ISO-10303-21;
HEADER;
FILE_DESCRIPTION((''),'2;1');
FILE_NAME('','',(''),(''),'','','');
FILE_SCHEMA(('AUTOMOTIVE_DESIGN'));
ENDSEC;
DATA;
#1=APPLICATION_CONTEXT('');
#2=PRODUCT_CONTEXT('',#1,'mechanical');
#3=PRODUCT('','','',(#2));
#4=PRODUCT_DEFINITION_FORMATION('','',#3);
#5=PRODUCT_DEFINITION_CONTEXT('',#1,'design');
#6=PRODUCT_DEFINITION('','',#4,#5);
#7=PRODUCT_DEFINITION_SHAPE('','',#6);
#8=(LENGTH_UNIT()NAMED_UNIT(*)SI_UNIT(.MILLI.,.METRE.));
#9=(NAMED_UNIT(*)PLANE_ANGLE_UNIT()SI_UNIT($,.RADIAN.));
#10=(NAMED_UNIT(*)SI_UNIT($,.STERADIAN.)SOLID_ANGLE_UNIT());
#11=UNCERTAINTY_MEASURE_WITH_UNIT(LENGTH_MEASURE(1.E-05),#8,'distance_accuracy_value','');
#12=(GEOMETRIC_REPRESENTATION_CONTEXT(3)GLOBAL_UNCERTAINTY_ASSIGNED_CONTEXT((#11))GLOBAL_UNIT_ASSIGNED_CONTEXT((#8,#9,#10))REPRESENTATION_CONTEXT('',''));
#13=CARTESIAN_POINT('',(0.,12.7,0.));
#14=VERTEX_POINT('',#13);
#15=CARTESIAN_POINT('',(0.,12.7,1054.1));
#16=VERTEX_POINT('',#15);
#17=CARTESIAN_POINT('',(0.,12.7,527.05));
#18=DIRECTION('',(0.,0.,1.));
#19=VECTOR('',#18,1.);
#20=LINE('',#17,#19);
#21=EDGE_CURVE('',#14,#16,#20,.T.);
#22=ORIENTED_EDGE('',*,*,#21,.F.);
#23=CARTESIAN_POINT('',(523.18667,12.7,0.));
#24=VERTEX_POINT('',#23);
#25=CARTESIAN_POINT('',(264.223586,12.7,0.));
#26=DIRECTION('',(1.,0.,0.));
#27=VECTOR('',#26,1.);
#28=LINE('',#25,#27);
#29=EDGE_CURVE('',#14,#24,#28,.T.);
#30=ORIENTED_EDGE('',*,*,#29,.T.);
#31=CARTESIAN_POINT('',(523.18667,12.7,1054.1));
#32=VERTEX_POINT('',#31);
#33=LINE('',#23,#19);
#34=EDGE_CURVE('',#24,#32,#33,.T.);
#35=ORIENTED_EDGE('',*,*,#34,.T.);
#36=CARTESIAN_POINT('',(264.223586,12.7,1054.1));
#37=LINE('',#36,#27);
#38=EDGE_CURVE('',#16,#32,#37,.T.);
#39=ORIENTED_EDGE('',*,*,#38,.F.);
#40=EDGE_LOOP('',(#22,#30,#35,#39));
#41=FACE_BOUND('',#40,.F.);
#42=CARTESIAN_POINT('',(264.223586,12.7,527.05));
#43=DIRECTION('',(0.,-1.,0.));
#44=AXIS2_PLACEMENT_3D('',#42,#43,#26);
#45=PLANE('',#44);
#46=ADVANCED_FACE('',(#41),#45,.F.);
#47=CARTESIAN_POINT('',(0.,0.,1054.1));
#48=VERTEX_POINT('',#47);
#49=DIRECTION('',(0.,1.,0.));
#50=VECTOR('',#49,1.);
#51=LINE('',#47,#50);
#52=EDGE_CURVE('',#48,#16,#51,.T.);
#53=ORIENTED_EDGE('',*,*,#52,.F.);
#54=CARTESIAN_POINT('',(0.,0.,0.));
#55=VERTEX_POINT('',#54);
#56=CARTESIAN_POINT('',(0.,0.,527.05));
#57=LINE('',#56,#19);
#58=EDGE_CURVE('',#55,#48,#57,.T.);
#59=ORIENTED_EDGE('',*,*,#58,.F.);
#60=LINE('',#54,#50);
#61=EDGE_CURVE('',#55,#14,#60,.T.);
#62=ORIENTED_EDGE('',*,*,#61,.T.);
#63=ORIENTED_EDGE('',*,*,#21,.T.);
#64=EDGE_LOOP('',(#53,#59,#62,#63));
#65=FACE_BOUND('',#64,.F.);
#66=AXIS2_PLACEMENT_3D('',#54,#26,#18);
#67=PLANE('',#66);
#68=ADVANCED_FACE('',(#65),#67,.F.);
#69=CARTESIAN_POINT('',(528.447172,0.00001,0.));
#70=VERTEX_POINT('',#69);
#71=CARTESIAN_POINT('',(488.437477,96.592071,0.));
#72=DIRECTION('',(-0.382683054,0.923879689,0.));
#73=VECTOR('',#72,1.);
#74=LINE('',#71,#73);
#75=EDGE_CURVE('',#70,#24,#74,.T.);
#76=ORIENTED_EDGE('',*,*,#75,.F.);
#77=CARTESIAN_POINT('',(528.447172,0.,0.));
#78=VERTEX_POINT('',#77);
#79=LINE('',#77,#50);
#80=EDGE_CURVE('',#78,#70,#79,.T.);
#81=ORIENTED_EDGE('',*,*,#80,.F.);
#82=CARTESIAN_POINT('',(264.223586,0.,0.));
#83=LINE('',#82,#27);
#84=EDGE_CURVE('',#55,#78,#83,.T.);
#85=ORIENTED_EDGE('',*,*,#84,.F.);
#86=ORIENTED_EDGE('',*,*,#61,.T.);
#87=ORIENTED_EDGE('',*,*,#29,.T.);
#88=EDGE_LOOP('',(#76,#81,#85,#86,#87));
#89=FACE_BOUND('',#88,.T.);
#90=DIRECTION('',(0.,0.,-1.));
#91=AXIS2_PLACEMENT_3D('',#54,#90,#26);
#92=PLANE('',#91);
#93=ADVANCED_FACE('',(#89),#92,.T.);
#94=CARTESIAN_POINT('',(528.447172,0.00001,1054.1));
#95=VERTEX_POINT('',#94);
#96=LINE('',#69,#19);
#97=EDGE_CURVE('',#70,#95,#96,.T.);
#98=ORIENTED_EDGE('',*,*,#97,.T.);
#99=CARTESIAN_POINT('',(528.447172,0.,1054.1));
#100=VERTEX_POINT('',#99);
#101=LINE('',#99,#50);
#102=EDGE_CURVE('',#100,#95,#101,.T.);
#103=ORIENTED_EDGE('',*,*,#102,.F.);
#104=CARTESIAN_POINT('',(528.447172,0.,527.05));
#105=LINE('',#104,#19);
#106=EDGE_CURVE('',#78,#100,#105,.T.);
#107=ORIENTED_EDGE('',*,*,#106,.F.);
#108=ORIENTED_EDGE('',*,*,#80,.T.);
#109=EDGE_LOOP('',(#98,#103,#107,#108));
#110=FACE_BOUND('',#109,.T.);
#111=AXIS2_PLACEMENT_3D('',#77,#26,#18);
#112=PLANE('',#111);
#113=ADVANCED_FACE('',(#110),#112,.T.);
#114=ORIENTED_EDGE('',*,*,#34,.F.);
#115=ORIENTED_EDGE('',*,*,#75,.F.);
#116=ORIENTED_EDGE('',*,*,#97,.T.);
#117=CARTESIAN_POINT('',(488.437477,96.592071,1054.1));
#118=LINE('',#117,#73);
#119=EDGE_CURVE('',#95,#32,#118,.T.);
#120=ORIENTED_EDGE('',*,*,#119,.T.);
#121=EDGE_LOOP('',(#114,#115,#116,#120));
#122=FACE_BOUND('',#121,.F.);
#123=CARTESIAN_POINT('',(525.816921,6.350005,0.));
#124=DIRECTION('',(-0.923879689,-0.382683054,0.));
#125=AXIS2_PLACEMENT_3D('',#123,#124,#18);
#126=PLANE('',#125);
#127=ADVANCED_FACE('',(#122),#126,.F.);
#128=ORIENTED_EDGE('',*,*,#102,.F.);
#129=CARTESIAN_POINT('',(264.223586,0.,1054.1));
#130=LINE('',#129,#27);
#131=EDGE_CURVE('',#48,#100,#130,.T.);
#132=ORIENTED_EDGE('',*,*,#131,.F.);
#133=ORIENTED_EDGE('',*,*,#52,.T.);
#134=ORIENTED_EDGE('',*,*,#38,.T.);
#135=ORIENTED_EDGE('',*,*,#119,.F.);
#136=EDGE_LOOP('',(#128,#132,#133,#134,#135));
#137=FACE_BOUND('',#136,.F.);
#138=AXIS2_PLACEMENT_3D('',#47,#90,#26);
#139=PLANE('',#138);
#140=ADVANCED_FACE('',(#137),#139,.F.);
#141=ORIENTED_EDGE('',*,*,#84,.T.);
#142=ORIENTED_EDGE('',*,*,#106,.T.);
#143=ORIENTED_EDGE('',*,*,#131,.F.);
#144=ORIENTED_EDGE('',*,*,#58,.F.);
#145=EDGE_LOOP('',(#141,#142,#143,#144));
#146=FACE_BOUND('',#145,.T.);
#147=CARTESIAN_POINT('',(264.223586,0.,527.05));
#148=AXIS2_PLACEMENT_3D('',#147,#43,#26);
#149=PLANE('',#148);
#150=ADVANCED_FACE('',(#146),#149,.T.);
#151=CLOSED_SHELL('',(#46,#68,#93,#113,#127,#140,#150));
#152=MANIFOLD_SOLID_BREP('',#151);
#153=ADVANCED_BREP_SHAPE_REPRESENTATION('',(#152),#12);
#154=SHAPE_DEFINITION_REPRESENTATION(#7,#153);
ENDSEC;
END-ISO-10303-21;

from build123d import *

# Parameters (mm, degrees)
F0_W     = 528.4471722421
F0_H     = 1054.1
F1_DEPTH = 12.7
F2_SIZE2 = 5.260502
F2_SIZE  = 12.69999


# Not quite as in the source:
# - a fillet or chamfer is up to 0.001 mm smaller than in the source, because OpenCascade refuses the exact size


with BuildPart() as f1:
    # F0 (on Front) → F1 (new body)
    with BuildSketch(Plane.XZ):
        with Locations((264.2235861211, 527.05)):
            Rectangle(F0_W, F0_H)
    extrude(amount=-F1_DEPTH)

    # F2 (size 12.7 and 5.2605122421 in the source; OpenCascade refuses exactly that, so slightly less here)
    f2_edges = [f1.edges().sort_by_distance(p)[0] for p in [
        (528.447172, 12.7, 527.05),
    ]]
    f2_side = f1.faces().sort_by_distance((528.447172, 6.35, 527.05))[0]
    chamfer(f2_edges, length=F2_SIZE, length2=F2_SIZE2, reference=f2_side)


solid = f1.part
